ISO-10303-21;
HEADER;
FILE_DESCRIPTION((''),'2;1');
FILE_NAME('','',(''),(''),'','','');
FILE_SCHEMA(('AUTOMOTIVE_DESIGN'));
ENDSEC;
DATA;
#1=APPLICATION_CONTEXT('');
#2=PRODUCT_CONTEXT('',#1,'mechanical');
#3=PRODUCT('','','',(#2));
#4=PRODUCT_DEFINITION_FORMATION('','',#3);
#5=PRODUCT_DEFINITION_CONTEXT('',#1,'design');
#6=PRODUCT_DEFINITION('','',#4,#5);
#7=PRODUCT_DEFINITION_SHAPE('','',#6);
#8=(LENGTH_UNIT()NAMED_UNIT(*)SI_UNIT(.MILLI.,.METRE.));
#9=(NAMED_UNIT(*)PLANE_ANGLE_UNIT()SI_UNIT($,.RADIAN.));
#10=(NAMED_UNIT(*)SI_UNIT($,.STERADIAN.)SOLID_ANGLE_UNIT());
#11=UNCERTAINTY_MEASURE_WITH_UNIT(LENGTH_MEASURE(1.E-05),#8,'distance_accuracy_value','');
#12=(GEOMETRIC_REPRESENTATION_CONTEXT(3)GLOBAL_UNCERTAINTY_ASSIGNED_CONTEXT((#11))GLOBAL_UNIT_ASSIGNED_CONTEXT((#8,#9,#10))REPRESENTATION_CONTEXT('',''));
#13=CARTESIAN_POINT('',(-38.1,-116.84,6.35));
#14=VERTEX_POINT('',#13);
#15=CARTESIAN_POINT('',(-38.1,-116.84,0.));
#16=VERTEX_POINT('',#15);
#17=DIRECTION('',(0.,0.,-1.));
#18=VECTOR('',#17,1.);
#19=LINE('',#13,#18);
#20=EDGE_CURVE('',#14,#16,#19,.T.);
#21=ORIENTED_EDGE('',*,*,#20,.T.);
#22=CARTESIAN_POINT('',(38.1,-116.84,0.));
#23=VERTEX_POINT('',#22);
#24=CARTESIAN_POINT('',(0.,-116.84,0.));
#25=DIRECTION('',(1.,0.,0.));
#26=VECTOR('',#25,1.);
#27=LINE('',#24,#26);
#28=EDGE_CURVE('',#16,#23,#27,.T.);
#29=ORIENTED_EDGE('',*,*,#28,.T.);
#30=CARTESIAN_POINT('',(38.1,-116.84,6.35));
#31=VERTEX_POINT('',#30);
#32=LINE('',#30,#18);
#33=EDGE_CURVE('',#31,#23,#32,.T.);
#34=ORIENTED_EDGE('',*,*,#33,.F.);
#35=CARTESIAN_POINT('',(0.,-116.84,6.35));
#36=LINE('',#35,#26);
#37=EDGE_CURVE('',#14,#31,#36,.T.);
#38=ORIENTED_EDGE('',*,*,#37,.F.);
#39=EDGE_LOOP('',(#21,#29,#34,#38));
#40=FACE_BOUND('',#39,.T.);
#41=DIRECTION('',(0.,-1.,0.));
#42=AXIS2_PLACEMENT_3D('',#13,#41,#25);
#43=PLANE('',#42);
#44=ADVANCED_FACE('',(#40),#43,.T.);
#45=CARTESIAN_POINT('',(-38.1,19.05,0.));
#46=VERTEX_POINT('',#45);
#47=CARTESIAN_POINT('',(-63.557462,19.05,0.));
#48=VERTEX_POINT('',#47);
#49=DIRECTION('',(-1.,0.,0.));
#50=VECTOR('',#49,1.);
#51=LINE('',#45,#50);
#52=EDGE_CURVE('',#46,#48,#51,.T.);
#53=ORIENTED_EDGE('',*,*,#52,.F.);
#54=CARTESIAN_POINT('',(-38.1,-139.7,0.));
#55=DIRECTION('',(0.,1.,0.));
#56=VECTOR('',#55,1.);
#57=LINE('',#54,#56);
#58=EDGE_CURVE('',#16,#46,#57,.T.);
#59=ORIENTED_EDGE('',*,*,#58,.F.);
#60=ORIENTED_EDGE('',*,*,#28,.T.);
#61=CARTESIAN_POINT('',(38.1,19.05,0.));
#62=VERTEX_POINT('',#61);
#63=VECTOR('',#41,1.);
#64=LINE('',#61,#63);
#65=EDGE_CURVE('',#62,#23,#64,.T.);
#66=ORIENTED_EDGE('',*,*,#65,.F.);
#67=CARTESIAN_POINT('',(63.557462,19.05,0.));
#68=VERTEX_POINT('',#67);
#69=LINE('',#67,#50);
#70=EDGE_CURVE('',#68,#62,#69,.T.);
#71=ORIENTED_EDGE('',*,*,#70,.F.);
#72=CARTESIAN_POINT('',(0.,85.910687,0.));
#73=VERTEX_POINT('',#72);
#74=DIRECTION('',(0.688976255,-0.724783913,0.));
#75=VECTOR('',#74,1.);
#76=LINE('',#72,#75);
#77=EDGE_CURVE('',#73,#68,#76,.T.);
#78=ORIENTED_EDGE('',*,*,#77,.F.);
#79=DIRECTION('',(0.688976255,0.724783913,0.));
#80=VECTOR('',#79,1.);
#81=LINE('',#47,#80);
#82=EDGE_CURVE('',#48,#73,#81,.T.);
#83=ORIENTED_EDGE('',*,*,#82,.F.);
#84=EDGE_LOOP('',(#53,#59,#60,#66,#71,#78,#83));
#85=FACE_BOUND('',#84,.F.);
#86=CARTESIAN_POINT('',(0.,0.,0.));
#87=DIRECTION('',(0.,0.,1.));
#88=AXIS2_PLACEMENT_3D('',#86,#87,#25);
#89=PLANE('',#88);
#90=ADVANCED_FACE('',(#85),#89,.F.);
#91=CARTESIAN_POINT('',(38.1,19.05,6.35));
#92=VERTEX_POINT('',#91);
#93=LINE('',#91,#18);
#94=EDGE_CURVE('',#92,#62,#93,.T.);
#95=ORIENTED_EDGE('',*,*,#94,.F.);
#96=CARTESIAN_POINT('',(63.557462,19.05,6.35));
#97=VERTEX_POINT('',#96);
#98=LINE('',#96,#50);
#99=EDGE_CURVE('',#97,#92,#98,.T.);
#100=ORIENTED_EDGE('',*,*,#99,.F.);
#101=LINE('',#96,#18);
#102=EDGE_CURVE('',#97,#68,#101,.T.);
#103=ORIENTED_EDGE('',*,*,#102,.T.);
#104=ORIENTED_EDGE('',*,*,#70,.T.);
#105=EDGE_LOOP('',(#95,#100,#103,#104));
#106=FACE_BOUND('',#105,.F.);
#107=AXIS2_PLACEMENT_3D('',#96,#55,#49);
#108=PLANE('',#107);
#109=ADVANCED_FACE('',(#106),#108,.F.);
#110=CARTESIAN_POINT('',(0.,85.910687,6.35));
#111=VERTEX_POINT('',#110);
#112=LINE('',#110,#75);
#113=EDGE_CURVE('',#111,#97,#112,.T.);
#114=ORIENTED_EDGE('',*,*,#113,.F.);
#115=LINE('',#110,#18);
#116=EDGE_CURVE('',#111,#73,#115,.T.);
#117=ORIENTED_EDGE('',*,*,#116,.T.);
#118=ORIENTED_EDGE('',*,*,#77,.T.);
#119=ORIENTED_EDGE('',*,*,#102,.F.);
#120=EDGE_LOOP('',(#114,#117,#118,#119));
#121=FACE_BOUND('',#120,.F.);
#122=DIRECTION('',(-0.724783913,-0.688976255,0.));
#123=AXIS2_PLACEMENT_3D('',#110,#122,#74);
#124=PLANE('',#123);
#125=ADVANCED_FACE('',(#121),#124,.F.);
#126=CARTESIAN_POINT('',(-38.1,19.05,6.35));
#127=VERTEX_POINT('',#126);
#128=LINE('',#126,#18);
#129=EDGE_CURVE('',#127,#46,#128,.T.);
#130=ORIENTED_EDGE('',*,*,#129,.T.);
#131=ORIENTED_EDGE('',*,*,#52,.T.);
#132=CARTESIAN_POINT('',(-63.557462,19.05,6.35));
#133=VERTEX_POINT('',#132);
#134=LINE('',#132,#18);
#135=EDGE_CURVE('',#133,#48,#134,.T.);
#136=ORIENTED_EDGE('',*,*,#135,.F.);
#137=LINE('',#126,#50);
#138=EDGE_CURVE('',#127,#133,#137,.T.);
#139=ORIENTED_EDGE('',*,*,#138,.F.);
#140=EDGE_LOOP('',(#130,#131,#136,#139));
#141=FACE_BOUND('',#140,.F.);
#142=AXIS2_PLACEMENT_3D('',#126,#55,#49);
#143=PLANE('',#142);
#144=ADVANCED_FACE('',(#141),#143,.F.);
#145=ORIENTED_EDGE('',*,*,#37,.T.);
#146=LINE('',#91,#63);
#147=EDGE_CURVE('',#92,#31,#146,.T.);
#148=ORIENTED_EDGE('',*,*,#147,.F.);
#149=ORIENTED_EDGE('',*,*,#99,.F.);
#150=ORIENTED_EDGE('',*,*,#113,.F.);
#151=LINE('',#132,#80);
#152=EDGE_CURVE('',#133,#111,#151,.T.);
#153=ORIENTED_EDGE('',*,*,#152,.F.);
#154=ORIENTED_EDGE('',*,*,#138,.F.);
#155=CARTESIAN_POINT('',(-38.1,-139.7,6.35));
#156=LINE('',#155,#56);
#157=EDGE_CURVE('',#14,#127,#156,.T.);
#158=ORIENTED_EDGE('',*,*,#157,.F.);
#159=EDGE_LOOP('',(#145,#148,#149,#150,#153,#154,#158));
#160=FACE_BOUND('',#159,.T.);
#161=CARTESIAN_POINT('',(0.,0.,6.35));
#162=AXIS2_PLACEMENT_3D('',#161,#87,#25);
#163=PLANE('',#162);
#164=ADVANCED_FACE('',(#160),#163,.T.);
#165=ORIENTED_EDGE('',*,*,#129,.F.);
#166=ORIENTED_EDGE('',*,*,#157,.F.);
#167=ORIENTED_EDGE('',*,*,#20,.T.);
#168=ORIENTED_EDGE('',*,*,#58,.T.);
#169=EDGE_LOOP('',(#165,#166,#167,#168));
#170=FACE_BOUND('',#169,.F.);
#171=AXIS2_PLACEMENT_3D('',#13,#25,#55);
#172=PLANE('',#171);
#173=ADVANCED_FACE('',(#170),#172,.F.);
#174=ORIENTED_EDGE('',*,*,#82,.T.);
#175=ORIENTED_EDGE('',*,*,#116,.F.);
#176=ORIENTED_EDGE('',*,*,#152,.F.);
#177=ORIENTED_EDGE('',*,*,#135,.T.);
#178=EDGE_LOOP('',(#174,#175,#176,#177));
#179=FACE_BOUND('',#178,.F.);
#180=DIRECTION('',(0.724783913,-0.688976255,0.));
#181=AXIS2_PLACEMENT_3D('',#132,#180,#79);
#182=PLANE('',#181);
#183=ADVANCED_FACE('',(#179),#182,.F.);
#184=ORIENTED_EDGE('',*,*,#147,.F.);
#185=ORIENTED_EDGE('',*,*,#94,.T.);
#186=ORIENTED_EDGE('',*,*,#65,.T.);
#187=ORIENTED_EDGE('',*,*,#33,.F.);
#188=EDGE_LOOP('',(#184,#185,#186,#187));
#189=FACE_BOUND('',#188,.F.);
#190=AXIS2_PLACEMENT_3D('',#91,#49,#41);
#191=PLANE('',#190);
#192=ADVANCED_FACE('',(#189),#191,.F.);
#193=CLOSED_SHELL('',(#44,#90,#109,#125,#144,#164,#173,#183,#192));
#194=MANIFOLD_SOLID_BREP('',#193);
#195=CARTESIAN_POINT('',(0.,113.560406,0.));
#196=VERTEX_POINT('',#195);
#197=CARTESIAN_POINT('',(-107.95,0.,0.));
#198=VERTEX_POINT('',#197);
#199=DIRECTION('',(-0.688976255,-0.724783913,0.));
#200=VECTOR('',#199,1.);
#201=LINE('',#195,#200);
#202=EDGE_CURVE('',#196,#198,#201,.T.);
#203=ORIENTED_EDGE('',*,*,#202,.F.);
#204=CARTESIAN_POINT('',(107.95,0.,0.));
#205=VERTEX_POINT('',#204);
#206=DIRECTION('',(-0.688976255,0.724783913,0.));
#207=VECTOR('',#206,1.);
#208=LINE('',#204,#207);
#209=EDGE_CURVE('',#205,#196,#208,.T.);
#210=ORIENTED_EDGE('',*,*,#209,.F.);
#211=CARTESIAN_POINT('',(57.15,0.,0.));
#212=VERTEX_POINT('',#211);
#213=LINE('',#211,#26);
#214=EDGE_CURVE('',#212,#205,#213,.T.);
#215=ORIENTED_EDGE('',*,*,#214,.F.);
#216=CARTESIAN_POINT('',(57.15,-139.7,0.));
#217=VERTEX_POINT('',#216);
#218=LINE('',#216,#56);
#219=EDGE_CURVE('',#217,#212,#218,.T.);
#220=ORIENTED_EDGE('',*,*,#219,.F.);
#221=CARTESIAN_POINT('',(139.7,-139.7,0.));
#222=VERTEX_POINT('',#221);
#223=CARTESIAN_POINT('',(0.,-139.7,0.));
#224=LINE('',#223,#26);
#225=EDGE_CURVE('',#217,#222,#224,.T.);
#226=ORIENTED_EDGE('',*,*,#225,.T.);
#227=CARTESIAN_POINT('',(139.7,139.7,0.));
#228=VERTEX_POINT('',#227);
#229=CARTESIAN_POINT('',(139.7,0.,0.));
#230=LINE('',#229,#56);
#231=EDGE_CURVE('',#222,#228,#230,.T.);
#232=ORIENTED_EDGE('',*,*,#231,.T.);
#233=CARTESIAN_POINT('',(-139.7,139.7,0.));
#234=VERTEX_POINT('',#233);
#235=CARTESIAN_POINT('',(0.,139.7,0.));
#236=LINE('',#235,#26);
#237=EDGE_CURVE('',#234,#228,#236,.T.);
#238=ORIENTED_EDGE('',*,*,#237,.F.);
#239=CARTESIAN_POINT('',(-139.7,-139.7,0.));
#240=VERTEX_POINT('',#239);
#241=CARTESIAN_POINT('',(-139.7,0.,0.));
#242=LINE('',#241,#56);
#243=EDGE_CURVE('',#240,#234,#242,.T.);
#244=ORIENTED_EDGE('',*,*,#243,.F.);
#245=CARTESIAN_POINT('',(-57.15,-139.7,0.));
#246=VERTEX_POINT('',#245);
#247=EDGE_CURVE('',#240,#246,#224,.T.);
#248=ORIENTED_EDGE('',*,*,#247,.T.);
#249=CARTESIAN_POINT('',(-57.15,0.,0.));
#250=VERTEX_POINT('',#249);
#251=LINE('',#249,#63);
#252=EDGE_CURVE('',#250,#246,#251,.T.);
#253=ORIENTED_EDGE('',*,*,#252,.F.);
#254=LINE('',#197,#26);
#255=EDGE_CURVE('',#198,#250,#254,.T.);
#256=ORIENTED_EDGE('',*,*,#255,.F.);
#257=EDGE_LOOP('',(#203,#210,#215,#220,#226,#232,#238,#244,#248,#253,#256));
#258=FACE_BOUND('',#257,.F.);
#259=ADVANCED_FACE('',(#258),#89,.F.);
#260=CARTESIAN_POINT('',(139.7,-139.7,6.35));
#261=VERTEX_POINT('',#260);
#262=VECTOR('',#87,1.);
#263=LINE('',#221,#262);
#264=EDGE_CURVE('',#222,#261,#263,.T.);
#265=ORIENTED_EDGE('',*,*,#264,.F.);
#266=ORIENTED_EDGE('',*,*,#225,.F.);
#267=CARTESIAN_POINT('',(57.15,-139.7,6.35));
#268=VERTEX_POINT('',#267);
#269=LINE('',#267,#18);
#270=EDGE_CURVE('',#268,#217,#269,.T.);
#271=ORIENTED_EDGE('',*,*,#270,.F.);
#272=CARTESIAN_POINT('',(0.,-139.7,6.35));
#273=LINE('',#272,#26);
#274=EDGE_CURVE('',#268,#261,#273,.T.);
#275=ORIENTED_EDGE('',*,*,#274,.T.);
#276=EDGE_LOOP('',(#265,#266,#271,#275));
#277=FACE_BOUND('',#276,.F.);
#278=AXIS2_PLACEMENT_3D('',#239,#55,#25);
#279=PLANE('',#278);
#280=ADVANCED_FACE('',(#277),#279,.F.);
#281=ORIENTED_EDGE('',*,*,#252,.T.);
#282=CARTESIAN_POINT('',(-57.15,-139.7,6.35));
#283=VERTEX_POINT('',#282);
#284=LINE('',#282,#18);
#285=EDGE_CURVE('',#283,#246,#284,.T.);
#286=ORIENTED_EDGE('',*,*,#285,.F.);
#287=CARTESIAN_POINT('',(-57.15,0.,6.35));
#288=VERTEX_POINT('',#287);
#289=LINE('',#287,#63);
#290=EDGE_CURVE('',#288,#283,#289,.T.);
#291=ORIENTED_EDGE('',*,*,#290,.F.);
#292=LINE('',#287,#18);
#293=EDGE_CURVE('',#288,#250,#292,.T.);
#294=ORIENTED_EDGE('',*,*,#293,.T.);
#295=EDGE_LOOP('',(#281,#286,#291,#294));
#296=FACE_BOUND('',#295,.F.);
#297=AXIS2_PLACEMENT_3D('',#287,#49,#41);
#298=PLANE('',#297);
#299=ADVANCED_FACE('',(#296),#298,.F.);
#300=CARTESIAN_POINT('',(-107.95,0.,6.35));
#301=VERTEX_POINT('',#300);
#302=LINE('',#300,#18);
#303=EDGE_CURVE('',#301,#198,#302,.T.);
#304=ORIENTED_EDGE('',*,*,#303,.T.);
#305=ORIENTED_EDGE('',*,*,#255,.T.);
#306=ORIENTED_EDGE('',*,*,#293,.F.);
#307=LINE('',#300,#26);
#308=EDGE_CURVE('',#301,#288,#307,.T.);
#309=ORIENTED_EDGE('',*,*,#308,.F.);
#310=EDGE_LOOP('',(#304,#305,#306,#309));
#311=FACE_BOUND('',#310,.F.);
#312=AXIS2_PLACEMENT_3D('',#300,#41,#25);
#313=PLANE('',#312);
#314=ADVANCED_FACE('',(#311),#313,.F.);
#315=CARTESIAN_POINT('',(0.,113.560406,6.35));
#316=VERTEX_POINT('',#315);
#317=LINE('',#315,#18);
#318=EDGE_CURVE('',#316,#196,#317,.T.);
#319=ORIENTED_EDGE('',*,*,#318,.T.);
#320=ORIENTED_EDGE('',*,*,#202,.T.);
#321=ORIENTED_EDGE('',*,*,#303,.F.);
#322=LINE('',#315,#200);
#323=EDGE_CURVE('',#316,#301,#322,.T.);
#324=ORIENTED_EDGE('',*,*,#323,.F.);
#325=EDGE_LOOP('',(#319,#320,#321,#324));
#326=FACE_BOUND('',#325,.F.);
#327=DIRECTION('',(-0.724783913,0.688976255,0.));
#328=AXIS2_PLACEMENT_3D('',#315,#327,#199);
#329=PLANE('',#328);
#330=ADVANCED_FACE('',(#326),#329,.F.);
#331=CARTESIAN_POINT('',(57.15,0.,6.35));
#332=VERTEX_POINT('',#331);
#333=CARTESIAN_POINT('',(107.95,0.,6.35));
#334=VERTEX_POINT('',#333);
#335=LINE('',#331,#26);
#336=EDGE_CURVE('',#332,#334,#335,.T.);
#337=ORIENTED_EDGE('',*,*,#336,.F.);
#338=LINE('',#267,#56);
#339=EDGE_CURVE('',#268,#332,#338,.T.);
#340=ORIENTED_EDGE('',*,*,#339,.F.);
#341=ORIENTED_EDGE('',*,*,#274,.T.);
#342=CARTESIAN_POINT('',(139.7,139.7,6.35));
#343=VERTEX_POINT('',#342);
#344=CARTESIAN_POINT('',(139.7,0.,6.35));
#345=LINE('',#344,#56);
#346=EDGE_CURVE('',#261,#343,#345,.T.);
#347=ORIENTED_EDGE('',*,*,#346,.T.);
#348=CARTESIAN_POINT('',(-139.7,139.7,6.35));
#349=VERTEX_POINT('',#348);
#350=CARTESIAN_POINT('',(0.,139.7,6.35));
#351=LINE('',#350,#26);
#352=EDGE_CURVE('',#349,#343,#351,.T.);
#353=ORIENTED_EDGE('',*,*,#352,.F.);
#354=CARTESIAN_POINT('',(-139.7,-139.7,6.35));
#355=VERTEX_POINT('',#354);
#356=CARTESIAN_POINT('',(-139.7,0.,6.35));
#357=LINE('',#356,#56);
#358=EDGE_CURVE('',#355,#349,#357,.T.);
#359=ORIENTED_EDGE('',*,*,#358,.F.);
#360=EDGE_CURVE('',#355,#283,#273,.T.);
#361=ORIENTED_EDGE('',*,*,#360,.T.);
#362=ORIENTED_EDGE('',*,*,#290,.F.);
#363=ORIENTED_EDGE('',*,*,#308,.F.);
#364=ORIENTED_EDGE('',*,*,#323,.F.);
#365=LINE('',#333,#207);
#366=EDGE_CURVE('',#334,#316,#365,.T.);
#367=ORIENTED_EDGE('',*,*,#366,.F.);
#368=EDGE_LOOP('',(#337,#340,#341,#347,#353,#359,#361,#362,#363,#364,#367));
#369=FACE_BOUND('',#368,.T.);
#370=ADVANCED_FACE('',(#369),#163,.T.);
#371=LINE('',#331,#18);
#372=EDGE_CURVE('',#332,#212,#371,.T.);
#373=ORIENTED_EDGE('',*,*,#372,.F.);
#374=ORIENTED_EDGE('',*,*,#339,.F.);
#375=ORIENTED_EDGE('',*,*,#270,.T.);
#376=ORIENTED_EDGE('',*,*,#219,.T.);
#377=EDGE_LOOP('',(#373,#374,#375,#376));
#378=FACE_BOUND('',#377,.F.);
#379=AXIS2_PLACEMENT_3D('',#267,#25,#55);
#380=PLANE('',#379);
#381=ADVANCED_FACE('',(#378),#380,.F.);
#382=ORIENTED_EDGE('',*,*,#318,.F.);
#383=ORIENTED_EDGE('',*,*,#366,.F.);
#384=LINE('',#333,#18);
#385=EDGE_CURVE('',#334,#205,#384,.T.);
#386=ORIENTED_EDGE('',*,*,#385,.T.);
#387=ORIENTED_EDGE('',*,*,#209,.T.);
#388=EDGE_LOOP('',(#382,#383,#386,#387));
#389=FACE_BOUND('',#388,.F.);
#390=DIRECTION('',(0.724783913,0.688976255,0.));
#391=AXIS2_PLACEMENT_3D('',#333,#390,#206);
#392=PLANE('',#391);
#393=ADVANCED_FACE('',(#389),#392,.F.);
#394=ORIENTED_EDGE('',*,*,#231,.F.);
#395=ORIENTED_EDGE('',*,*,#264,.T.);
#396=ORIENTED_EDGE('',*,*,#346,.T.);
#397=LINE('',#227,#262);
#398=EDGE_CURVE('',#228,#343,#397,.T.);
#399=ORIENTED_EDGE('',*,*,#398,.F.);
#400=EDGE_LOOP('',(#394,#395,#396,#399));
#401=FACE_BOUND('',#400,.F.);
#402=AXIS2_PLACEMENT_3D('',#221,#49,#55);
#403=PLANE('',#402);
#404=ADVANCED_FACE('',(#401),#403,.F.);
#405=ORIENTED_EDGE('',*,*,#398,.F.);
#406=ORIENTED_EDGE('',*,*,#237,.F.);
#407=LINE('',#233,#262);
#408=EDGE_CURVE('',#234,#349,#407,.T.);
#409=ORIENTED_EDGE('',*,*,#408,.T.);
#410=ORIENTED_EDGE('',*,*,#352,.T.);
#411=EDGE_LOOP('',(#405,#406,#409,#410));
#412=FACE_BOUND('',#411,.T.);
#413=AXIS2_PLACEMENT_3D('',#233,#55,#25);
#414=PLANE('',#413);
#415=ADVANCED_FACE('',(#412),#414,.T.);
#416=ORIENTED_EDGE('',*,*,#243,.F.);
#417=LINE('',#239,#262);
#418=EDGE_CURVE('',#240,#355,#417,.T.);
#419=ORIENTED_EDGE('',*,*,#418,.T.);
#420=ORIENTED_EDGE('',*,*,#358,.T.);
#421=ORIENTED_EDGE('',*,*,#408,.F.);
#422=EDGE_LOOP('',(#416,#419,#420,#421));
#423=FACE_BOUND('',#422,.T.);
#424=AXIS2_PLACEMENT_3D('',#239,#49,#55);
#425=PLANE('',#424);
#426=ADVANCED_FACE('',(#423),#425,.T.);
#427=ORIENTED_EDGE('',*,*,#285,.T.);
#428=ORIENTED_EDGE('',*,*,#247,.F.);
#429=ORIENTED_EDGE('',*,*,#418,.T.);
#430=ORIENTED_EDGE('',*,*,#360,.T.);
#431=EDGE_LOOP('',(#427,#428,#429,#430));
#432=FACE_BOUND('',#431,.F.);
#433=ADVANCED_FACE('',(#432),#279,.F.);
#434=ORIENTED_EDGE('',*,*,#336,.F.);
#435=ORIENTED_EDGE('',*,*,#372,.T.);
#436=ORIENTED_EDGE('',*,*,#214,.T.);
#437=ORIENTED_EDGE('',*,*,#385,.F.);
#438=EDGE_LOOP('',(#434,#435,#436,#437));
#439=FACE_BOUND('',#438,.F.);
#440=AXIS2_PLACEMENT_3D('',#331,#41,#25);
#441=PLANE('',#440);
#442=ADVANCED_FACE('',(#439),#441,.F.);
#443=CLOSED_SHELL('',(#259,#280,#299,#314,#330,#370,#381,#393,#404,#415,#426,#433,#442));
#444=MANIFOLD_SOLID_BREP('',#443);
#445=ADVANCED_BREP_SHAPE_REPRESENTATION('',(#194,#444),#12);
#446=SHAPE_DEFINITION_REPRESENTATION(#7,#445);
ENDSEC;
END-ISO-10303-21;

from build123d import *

# Parameters (mm, degrees)
F0_W     = 279.4
F0_H     = 279.4
F1_DEPTH = 6.35
F2_W     = 76.2
F2_H     = 12.7
F2_H_2   = 10.16
F3_DEPTH = 6.35


# Not quite as in the source:
# - a feature names something its author has since deleted; it is built from what else it names


with BuildPart() as f1:
    # F0 (on Top) → F1 (new body)
    with BuildSketch(Plane.XY):
        Rectangle(F0_W, F0_H)
    extrude(amount=F1_DEPTH)

    # F2 (on face) → F3 (cut)
    with BuildSketch(Plane.XY.offset(6.35)):
        Polygon((57.15, 0), (107.95, 0), (0, 113.5604063203), (-107.95, 0), (-57.15, 0), (-57.15, -139.7), (-38.1, -139.7), (-38.1, -127), (-38.1, -116.84), (-38.1, 0), (-38.1, 19.05), (-63.5574616586, 19.05), (0, 85.9106870833), (63.5574616586, 19.05), (38.1, 19.05), (38.1, 0), (38.1, -116.84), (38.1, -127), (38.1, -139.7), (57.15, -139.7), align=None)
        with Locations((0, -133.35)):
            Rectangle(F2_W, F2_H)
        with Locations((0, -121.92)):
            Rectangle(F2_W, F2_H_2)
    extrude(amount=-F3_DEPTH, mode=Mode.SUBTRACT)


solid = f1.part
